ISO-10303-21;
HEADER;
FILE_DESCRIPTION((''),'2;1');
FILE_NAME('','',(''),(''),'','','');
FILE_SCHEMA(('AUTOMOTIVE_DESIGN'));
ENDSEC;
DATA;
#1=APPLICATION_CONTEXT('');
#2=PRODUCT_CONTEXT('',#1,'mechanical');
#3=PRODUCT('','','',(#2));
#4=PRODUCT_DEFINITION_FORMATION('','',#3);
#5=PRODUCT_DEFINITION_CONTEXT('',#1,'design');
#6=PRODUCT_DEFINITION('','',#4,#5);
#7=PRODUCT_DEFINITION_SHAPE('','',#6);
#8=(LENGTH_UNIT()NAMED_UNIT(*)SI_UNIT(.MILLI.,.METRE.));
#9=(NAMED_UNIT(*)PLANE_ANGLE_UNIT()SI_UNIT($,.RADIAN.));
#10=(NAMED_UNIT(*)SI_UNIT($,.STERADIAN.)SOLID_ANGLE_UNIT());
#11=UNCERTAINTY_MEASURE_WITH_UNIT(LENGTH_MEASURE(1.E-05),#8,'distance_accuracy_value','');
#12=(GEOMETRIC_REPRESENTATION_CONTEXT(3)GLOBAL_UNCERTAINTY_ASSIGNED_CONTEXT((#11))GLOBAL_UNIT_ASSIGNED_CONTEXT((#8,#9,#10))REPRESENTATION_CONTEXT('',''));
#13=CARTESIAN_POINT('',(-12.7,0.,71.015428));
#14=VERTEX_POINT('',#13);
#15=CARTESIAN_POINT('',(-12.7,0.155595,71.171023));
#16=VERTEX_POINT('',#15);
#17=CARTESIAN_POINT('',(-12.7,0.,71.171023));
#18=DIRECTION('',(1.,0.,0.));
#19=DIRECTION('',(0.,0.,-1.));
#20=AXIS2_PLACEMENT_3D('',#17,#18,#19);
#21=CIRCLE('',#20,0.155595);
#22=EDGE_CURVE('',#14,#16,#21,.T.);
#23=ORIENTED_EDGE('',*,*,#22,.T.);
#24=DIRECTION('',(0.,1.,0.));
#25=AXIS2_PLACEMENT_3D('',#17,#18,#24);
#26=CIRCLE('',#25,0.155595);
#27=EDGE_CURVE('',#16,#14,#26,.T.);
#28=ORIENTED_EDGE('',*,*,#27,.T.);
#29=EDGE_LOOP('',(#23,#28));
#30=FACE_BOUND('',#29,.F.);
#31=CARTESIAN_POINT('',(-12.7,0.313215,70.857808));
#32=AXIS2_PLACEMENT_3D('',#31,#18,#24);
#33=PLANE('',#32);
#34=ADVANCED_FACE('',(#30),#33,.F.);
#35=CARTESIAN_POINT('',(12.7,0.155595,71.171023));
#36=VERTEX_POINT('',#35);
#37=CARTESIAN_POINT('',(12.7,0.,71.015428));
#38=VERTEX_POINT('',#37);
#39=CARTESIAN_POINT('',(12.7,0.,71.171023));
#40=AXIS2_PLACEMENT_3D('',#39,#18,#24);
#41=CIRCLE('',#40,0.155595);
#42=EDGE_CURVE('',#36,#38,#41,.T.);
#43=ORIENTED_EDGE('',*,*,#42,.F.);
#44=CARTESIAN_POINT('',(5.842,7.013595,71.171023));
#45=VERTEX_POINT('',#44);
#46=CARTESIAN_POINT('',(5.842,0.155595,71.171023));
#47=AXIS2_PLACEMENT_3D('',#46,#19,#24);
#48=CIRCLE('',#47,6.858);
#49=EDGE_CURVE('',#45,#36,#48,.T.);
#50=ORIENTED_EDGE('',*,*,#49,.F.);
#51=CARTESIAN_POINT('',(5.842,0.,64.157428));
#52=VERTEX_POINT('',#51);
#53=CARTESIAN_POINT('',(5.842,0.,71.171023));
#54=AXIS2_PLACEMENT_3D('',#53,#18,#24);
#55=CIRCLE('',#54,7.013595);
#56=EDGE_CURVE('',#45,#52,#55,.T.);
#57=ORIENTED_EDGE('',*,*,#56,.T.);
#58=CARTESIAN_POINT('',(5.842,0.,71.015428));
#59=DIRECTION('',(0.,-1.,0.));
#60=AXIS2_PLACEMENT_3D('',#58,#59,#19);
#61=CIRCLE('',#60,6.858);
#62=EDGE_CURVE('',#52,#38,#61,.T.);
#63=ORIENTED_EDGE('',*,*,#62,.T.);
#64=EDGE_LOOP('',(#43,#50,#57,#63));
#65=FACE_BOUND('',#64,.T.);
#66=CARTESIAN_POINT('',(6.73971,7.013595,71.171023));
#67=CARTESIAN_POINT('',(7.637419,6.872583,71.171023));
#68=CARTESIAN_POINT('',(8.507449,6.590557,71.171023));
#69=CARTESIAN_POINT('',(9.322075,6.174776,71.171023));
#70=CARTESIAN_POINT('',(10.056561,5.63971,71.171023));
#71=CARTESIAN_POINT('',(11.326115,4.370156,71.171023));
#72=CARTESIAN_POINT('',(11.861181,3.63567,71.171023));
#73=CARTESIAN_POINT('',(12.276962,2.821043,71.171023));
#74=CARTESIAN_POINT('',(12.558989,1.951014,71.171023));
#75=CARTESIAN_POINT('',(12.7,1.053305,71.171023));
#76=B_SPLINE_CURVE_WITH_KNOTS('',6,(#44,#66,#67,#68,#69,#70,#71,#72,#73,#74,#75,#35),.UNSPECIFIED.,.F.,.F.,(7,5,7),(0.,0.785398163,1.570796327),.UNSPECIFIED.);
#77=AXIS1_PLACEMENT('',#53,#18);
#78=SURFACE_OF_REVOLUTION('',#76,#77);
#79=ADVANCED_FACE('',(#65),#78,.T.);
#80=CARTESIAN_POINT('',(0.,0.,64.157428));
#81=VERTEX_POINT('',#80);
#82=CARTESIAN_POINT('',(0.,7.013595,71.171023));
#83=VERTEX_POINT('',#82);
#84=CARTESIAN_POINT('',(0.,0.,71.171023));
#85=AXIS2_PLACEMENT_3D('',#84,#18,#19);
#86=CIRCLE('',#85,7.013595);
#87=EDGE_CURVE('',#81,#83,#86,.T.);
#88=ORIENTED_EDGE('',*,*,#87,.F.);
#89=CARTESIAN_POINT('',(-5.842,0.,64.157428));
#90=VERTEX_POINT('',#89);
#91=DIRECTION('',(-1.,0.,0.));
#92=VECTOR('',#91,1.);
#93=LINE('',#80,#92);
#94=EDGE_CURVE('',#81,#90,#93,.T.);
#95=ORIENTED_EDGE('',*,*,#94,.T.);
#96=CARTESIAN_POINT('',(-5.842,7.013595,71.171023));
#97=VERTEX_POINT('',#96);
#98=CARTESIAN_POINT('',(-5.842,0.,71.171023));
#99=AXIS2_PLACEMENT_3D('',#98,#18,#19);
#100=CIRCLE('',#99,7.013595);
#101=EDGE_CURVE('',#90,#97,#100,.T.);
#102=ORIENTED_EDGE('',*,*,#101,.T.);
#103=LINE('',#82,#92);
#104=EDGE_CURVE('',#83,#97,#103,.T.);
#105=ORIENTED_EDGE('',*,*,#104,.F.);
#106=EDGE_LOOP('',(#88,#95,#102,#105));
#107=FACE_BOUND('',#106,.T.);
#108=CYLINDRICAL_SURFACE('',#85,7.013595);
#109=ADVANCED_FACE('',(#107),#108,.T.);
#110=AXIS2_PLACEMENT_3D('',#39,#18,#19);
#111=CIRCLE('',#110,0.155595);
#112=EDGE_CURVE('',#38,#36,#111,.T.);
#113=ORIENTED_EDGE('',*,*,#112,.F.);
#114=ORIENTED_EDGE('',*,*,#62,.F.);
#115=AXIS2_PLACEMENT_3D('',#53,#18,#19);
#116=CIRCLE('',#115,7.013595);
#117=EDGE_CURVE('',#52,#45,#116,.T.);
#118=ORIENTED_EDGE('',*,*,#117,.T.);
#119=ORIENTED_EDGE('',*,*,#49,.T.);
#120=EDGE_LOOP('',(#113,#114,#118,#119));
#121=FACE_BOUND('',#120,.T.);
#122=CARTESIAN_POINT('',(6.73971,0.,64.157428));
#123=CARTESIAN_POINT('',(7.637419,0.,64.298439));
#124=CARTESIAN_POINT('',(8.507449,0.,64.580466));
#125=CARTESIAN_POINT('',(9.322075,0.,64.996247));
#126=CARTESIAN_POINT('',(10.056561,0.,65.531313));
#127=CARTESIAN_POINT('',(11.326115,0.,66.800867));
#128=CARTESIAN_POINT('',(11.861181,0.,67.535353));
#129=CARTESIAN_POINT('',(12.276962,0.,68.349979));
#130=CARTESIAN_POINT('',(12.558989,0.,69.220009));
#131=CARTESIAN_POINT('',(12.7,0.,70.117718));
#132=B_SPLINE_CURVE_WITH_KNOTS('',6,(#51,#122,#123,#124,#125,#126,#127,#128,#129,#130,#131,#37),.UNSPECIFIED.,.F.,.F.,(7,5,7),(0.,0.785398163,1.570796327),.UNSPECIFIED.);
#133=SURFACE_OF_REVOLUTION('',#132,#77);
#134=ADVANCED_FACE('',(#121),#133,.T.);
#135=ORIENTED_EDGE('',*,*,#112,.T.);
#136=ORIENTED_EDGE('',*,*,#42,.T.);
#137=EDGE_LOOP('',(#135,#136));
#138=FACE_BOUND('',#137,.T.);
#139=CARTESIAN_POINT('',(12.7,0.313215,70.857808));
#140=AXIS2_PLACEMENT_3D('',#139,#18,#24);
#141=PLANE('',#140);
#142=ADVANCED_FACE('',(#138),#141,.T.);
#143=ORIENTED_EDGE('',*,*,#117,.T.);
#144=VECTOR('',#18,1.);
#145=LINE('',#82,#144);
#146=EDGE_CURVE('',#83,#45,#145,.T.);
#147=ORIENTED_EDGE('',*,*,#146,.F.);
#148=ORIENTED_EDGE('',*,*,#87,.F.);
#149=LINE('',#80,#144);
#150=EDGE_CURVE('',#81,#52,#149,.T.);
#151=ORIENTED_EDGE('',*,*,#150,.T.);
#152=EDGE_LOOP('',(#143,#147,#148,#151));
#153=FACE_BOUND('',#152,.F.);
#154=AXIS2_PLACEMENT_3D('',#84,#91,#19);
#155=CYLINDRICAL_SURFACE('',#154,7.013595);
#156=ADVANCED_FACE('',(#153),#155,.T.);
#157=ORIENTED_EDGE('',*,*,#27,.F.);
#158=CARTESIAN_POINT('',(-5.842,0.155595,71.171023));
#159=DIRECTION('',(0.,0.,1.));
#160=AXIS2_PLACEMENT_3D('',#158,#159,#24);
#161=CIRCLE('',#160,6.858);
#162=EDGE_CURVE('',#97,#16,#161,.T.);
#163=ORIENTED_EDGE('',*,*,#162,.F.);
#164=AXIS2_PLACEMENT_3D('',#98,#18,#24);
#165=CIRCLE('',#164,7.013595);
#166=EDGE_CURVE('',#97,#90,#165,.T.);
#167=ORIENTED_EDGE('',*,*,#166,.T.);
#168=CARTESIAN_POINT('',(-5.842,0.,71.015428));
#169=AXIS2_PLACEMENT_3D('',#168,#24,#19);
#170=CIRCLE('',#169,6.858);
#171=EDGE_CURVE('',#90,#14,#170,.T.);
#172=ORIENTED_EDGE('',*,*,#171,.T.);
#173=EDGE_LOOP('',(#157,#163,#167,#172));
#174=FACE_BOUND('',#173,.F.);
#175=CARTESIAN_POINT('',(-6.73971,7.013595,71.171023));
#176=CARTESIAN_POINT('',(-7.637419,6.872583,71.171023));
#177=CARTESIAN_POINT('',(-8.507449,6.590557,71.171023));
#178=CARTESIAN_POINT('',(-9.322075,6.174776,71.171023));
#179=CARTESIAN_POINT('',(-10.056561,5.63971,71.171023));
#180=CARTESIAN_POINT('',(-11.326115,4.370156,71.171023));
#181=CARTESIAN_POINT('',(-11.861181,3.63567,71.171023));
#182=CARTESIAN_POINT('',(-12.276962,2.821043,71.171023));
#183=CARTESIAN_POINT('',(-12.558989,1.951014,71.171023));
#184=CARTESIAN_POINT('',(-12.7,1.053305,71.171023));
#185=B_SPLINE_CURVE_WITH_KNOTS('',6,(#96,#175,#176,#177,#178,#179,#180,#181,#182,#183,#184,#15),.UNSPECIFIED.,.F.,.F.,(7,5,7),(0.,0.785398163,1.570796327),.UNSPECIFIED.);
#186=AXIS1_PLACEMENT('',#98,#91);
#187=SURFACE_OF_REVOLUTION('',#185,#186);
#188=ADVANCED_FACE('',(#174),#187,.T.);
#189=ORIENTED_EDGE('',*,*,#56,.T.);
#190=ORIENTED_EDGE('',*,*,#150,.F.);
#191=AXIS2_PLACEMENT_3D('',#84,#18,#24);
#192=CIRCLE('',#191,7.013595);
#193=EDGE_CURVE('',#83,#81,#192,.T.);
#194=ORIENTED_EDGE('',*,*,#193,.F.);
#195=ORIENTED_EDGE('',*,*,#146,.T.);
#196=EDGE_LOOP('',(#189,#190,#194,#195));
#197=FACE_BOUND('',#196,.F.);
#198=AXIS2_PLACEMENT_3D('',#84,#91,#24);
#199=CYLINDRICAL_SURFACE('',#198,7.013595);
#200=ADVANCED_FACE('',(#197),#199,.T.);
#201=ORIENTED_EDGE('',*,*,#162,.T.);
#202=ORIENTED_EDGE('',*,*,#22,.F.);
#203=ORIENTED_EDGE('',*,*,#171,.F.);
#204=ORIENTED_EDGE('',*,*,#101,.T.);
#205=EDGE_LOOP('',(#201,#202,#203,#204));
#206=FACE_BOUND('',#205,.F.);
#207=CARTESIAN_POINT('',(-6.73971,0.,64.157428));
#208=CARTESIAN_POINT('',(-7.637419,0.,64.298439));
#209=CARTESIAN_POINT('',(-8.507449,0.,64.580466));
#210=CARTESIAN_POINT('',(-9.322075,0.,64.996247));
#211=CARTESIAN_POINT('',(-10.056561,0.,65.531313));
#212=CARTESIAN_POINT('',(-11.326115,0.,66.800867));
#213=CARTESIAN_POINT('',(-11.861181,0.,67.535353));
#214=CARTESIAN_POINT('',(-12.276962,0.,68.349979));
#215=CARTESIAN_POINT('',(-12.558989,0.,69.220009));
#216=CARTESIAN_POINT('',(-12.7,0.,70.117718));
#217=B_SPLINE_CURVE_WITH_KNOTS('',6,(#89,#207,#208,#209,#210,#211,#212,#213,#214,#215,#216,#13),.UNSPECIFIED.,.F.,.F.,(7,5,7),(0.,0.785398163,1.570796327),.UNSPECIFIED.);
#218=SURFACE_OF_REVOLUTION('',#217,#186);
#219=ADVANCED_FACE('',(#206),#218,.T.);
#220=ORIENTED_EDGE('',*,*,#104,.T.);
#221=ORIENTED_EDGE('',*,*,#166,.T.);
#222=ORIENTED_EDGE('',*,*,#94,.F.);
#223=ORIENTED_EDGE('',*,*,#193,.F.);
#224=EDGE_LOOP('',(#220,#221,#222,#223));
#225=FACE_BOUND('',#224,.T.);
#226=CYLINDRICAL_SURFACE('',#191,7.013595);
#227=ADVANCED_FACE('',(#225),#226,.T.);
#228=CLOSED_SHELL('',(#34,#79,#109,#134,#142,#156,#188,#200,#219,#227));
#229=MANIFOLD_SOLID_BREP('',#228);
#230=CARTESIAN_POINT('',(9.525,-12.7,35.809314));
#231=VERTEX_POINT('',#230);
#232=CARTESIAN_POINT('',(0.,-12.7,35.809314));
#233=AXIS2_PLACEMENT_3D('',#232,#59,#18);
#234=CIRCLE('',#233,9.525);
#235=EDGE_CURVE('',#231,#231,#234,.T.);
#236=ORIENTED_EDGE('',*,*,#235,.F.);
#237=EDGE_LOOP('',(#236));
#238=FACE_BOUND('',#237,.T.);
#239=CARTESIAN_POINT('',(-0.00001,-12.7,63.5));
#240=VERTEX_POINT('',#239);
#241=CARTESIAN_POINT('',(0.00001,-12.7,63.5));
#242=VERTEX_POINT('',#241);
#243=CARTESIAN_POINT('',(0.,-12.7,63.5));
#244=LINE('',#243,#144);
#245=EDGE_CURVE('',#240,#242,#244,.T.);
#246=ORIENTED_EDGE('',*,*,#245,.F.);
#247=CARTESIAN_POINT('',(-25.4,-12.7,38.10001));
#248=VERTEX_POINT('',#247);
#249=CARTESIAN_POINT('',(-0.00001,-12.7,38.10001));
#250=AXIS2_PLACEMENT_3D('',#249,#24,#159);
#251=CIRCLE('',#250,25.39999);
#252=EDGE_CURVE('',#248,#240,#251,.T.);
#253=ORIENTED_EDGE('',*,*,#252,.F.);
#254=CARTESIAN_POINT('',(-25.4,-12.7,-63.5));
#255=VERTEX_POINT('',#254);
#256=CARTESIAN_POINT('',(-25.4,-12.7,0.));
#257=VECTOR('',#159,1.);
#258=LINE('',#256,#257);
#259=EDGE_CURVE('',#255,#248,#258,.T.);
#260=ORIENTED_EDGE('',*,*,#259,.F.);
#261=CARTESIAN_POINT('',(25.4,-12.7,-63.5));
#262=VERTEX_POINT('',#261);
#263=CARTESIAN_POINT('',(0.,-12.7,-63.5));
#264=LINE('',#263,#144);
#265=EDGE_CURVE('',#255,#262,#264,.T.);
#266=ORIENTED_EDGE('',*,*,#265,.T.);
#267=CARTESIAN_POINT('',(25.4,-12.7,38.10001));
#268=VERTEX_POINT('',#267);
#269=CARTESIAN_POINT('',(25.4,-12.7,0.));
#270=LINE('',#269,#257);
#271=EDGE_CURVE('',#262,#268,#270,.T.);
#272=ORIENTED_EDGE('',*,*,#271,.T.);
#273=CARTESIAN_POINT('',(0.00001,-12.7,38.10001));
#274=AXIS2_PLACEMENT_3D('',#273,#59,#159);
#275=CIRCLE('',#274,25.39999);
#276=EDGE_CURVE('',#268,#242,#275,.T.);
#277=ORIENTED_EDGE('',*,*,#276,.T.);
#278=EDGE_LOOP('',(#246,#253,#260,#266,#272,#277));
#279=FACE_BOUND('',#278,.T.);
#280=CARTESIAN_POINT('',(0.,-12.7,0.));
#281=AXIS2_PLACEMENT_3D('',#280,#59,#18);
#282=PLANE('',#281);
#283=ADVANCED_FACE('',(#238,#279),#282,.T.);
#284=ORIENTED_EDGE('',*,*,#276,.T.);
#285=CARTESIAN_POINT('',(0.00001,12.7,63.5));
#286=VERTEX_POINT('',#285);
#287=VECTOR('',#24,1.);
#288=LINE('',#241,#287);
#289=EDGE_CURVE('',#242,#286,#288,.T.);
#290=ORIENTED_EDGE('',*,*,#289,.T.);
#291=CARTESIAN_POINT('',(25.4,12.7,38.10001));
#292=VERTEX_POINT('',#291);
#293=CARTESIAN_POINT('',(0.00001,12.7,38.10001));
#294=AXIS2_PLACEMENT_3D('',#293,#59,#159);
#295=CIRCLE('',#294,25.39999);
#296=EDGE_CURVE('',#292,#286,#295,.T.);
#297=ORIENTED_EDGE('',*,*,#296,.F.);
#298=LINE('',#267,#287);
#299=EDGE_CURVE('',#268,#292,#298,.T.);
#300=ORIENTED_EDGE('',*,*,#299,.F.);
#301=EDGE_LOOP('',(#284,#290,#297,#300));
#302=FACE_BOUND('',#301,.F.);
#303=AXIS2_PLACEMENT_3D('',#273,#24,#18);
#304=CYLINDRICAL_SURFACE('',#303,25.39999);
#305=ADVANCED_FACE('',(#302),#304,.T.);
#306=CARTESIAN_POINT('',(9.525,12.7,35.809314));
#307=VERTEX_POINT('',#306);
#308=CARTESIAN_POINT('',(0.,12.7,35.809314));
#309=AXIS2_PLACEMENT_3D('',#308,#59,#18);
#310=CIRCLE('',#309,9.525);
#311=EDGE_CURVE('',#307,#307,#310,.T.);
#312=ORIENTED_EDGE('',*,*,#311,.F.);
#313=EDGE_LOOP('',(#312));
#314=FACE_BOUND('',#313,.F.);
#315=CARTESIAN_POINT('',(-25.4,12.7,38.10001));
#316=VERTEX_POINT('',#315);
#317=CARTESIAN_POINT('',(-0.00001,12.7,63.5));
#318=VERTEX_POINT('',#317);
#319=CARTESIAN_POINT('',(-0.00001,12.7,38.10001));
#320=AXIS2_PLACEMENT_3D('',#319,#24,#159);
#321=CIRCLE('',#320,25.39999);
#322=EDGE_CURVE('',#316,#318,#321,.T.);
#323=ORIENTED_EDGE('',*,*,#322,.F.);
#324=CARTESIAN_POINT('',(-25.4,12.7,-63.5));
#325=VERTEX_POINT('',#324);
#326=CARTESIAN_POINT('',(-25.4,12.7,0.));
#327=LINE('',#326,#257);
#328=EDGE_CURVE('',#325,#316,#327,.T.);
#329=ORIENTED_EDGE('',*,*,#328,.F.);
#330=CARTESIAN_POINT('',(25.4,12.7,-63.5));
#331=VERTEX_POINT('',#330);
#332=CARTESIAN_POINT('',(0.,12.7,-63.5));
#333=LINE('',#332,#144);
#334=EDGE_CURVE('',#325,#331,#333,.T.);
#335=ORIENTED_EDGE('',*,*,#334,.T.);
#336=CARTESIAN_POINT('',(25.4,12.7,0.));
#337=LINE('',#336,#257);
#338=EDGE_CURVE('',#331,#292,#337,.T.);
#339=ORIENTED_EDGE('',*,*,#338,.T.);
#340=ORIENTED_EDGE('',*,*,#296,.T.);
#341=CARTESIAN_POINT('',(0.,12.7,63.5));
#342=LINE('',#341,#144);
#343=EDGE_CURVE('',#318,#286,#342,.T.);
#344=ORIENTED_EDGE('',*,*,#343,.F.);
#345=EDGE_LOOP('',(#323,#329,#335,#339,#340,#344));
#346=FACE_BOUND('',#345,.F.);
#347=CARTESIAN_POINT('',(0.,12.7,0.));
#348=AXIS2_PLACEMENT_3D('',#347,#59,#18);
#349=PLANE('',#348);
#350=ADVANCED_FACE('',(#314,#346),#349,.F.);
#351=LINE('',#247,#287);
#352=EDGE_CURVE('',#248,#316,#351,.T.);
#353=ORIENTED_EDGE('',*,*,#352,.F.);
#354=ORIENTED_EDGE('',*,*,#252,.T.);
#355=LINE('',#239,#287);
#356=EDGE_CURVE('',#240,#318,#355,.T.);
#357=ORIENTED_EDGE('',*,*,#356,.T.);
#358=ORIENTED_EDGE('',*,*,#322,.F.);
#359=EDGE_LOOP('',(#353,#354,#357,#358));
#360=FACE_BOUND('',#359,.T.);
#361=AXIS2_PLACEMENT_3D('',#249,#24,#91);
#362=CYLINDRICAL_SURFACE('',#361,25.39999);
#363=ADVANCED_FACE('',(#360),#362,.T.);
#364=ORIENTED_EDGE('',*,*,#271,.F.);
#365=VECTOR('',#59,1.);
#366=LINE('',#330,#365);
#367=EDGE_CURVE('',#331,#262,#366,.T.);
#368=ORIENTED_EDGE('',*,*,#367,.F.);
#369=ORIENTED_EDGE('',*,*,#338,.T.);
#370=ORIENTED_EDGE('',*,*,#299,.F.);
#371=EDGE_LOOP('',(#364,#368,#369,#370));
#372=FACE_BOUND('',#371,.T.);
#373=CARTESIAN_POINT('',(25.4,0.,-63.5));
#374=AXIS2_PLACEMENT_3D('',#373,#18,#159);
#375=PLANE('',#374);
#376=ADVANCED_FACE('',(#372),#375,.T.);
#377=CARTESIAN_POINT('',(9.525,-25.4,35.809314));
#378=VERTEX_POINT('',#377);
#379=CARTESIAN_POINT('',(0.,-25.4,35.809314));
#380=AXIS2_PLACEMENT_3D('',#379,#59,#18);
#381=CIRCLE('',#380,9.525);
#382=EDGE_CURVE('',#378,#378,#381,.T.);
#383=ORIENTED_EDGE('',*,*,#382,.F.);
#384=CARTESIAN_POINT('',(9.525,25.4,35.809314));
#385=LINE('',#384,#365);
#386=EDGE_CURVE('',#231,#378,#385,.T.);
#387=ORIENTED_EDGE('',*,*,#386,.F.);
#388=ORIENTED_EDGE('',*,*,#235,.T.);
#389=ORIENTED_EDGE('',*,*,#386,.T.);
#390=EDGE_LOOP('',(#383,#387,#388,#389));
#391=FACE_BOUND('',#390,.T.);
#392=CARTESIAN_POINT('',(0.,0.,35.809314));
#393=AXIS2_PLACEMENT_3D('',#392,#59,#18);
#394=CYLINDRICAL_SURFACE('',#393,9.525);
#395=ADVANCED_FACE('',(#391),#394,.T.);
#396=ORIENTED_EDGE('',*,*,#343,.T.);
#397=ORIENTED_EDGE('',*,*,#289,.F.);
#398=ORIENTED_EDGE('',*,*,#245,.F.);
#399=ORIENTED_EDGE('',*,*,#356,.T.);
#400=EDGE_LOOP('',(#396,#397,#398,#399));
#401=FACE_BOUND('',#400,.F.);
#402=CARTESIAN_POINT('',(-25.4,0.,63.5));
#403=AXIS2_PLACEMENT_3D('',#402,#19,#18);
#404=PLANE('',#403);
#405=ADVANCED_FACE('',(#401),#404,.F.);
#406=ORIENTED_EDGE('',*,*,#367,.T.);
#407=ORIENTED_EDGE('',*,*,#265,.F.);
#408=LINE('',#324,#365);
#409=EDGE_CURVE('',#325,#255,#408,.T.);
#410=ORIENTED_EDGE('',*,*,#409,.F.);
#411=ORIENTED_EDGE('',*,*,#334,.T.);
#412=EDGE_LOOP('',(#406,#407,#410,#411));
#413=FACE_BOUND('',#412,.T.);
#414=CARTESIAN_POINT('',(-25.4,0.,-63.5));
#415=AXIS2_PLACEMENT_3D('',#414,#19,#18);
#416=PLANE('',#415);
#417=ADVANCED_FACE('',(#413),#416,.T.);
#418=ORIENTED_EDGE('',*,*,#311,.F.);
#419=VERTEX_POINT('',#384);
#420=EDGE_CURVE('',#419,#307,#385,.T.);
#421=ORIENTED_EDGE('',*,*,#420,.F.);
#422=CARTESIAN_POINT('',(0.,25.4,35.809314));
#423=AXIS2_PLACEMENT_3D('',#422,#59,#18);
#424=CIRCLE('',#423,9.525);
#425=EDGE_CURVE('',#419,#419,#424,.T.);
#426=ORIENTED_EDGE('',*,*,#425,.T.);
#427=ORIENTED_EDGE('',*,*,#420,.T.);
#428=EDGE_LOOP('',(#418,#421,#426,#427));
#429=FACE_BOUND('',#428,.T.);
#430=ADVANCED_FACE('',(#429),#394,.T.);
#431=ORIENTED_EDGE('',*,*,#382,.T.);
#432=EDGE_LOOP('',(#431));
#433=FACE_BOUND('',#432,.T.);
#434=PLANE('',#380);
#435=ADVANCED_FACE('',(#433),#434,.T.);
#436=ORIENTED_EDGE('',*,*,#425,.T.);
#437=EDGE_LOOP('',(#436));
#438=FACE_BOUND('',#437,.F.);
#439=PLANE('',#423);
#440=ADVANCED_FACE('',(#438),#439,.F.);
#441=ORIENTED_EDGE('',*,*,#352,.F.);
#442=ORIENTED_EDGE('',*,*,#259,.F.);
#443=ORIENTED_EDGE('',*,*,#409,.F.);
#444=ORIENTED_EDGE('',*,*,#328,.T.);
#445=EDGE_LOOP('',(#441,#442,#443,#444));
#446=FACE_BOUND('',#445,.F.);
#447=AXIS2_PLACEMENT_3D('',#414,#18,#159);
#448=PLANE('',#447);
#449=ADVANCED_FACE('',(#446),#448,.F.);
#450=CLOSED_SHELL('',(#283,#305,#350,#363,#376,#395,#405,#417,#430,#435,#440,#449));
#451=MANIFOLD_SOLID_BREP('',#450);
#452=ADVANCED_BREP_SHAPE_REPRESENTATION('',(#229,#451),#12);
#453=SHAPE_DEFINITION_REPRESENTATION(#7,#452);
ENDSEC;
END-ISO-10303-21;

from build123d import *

# Parameters (mm, degrees)
F0_W     = 50.8
F0_H     = 127
F1_DEPTH = 12.7
F2_R     = 25.39999
F3_R     = 9.525
F4_DEPTH = 25.4
F6_DEPTH = 12.7
F7_R     = 6.858


# Not quite as in the source:
# - a fillet or chamfer is up to 0.001 mm smaller than in the source, because OpenCascade refuses the exact size


with BuildPart() as f1:
    # F0 (on Front) → F1 (new body, symmetric)
    with BuildSketch(Plane.XZ):
        Rectangle(F0_W, F0_H)
    extrude(amount=F1_DEPTH, both=True)

    # F2 (radius 25.4 in the source; OpenCascade refuses exactly that, so slightly less here)
    f2_edges = [f1.edges().sort_by_distance(p)[0] for p in [
        (-25.4, 0, 63.5),
        (25.4, 0, 63.5),
    ]]
    fillet(f2_edges, radius=F2_R)

    # F3 (on Front) → F4 (join, symmetric)
    with BuildSketch(Plane.XZ):
        with Locations((0, 35.8093136142)):
            Circle(F3_R)
    extrude(amount=F4_DEPTH, both=True)


with BuildPart() as f6:
    # F5 (on Right) → F6 (new body, symmetric)
    with BuildSketch(Plane.YZ):
        with BuildLine():
            ThreePointArc((0, 64.1574280324), (4.9593605279, 66.2116624237), (7.0135949192, 71.1710229516))
            ThreePointArc((7.0135949192, 71.1710229516), (-4.9593605279, 76.1303834795), (0, 64.1574280324))
        make_face()
    extrude(amount=F6_DEPTH, both=True)

    # F7
    f7_edges = [f6.edges().sort_by_distance(p)[0] for p in [
        (-12.7, -4.959361, 76.130383),
        (12.7, 4.959361, 66.211662),
        (12.7, -4.959361, 76.130383),
    ]]
    fillet(f7_edges, radius=F7_R)


solid = Compound([f1.part, f6.part])
